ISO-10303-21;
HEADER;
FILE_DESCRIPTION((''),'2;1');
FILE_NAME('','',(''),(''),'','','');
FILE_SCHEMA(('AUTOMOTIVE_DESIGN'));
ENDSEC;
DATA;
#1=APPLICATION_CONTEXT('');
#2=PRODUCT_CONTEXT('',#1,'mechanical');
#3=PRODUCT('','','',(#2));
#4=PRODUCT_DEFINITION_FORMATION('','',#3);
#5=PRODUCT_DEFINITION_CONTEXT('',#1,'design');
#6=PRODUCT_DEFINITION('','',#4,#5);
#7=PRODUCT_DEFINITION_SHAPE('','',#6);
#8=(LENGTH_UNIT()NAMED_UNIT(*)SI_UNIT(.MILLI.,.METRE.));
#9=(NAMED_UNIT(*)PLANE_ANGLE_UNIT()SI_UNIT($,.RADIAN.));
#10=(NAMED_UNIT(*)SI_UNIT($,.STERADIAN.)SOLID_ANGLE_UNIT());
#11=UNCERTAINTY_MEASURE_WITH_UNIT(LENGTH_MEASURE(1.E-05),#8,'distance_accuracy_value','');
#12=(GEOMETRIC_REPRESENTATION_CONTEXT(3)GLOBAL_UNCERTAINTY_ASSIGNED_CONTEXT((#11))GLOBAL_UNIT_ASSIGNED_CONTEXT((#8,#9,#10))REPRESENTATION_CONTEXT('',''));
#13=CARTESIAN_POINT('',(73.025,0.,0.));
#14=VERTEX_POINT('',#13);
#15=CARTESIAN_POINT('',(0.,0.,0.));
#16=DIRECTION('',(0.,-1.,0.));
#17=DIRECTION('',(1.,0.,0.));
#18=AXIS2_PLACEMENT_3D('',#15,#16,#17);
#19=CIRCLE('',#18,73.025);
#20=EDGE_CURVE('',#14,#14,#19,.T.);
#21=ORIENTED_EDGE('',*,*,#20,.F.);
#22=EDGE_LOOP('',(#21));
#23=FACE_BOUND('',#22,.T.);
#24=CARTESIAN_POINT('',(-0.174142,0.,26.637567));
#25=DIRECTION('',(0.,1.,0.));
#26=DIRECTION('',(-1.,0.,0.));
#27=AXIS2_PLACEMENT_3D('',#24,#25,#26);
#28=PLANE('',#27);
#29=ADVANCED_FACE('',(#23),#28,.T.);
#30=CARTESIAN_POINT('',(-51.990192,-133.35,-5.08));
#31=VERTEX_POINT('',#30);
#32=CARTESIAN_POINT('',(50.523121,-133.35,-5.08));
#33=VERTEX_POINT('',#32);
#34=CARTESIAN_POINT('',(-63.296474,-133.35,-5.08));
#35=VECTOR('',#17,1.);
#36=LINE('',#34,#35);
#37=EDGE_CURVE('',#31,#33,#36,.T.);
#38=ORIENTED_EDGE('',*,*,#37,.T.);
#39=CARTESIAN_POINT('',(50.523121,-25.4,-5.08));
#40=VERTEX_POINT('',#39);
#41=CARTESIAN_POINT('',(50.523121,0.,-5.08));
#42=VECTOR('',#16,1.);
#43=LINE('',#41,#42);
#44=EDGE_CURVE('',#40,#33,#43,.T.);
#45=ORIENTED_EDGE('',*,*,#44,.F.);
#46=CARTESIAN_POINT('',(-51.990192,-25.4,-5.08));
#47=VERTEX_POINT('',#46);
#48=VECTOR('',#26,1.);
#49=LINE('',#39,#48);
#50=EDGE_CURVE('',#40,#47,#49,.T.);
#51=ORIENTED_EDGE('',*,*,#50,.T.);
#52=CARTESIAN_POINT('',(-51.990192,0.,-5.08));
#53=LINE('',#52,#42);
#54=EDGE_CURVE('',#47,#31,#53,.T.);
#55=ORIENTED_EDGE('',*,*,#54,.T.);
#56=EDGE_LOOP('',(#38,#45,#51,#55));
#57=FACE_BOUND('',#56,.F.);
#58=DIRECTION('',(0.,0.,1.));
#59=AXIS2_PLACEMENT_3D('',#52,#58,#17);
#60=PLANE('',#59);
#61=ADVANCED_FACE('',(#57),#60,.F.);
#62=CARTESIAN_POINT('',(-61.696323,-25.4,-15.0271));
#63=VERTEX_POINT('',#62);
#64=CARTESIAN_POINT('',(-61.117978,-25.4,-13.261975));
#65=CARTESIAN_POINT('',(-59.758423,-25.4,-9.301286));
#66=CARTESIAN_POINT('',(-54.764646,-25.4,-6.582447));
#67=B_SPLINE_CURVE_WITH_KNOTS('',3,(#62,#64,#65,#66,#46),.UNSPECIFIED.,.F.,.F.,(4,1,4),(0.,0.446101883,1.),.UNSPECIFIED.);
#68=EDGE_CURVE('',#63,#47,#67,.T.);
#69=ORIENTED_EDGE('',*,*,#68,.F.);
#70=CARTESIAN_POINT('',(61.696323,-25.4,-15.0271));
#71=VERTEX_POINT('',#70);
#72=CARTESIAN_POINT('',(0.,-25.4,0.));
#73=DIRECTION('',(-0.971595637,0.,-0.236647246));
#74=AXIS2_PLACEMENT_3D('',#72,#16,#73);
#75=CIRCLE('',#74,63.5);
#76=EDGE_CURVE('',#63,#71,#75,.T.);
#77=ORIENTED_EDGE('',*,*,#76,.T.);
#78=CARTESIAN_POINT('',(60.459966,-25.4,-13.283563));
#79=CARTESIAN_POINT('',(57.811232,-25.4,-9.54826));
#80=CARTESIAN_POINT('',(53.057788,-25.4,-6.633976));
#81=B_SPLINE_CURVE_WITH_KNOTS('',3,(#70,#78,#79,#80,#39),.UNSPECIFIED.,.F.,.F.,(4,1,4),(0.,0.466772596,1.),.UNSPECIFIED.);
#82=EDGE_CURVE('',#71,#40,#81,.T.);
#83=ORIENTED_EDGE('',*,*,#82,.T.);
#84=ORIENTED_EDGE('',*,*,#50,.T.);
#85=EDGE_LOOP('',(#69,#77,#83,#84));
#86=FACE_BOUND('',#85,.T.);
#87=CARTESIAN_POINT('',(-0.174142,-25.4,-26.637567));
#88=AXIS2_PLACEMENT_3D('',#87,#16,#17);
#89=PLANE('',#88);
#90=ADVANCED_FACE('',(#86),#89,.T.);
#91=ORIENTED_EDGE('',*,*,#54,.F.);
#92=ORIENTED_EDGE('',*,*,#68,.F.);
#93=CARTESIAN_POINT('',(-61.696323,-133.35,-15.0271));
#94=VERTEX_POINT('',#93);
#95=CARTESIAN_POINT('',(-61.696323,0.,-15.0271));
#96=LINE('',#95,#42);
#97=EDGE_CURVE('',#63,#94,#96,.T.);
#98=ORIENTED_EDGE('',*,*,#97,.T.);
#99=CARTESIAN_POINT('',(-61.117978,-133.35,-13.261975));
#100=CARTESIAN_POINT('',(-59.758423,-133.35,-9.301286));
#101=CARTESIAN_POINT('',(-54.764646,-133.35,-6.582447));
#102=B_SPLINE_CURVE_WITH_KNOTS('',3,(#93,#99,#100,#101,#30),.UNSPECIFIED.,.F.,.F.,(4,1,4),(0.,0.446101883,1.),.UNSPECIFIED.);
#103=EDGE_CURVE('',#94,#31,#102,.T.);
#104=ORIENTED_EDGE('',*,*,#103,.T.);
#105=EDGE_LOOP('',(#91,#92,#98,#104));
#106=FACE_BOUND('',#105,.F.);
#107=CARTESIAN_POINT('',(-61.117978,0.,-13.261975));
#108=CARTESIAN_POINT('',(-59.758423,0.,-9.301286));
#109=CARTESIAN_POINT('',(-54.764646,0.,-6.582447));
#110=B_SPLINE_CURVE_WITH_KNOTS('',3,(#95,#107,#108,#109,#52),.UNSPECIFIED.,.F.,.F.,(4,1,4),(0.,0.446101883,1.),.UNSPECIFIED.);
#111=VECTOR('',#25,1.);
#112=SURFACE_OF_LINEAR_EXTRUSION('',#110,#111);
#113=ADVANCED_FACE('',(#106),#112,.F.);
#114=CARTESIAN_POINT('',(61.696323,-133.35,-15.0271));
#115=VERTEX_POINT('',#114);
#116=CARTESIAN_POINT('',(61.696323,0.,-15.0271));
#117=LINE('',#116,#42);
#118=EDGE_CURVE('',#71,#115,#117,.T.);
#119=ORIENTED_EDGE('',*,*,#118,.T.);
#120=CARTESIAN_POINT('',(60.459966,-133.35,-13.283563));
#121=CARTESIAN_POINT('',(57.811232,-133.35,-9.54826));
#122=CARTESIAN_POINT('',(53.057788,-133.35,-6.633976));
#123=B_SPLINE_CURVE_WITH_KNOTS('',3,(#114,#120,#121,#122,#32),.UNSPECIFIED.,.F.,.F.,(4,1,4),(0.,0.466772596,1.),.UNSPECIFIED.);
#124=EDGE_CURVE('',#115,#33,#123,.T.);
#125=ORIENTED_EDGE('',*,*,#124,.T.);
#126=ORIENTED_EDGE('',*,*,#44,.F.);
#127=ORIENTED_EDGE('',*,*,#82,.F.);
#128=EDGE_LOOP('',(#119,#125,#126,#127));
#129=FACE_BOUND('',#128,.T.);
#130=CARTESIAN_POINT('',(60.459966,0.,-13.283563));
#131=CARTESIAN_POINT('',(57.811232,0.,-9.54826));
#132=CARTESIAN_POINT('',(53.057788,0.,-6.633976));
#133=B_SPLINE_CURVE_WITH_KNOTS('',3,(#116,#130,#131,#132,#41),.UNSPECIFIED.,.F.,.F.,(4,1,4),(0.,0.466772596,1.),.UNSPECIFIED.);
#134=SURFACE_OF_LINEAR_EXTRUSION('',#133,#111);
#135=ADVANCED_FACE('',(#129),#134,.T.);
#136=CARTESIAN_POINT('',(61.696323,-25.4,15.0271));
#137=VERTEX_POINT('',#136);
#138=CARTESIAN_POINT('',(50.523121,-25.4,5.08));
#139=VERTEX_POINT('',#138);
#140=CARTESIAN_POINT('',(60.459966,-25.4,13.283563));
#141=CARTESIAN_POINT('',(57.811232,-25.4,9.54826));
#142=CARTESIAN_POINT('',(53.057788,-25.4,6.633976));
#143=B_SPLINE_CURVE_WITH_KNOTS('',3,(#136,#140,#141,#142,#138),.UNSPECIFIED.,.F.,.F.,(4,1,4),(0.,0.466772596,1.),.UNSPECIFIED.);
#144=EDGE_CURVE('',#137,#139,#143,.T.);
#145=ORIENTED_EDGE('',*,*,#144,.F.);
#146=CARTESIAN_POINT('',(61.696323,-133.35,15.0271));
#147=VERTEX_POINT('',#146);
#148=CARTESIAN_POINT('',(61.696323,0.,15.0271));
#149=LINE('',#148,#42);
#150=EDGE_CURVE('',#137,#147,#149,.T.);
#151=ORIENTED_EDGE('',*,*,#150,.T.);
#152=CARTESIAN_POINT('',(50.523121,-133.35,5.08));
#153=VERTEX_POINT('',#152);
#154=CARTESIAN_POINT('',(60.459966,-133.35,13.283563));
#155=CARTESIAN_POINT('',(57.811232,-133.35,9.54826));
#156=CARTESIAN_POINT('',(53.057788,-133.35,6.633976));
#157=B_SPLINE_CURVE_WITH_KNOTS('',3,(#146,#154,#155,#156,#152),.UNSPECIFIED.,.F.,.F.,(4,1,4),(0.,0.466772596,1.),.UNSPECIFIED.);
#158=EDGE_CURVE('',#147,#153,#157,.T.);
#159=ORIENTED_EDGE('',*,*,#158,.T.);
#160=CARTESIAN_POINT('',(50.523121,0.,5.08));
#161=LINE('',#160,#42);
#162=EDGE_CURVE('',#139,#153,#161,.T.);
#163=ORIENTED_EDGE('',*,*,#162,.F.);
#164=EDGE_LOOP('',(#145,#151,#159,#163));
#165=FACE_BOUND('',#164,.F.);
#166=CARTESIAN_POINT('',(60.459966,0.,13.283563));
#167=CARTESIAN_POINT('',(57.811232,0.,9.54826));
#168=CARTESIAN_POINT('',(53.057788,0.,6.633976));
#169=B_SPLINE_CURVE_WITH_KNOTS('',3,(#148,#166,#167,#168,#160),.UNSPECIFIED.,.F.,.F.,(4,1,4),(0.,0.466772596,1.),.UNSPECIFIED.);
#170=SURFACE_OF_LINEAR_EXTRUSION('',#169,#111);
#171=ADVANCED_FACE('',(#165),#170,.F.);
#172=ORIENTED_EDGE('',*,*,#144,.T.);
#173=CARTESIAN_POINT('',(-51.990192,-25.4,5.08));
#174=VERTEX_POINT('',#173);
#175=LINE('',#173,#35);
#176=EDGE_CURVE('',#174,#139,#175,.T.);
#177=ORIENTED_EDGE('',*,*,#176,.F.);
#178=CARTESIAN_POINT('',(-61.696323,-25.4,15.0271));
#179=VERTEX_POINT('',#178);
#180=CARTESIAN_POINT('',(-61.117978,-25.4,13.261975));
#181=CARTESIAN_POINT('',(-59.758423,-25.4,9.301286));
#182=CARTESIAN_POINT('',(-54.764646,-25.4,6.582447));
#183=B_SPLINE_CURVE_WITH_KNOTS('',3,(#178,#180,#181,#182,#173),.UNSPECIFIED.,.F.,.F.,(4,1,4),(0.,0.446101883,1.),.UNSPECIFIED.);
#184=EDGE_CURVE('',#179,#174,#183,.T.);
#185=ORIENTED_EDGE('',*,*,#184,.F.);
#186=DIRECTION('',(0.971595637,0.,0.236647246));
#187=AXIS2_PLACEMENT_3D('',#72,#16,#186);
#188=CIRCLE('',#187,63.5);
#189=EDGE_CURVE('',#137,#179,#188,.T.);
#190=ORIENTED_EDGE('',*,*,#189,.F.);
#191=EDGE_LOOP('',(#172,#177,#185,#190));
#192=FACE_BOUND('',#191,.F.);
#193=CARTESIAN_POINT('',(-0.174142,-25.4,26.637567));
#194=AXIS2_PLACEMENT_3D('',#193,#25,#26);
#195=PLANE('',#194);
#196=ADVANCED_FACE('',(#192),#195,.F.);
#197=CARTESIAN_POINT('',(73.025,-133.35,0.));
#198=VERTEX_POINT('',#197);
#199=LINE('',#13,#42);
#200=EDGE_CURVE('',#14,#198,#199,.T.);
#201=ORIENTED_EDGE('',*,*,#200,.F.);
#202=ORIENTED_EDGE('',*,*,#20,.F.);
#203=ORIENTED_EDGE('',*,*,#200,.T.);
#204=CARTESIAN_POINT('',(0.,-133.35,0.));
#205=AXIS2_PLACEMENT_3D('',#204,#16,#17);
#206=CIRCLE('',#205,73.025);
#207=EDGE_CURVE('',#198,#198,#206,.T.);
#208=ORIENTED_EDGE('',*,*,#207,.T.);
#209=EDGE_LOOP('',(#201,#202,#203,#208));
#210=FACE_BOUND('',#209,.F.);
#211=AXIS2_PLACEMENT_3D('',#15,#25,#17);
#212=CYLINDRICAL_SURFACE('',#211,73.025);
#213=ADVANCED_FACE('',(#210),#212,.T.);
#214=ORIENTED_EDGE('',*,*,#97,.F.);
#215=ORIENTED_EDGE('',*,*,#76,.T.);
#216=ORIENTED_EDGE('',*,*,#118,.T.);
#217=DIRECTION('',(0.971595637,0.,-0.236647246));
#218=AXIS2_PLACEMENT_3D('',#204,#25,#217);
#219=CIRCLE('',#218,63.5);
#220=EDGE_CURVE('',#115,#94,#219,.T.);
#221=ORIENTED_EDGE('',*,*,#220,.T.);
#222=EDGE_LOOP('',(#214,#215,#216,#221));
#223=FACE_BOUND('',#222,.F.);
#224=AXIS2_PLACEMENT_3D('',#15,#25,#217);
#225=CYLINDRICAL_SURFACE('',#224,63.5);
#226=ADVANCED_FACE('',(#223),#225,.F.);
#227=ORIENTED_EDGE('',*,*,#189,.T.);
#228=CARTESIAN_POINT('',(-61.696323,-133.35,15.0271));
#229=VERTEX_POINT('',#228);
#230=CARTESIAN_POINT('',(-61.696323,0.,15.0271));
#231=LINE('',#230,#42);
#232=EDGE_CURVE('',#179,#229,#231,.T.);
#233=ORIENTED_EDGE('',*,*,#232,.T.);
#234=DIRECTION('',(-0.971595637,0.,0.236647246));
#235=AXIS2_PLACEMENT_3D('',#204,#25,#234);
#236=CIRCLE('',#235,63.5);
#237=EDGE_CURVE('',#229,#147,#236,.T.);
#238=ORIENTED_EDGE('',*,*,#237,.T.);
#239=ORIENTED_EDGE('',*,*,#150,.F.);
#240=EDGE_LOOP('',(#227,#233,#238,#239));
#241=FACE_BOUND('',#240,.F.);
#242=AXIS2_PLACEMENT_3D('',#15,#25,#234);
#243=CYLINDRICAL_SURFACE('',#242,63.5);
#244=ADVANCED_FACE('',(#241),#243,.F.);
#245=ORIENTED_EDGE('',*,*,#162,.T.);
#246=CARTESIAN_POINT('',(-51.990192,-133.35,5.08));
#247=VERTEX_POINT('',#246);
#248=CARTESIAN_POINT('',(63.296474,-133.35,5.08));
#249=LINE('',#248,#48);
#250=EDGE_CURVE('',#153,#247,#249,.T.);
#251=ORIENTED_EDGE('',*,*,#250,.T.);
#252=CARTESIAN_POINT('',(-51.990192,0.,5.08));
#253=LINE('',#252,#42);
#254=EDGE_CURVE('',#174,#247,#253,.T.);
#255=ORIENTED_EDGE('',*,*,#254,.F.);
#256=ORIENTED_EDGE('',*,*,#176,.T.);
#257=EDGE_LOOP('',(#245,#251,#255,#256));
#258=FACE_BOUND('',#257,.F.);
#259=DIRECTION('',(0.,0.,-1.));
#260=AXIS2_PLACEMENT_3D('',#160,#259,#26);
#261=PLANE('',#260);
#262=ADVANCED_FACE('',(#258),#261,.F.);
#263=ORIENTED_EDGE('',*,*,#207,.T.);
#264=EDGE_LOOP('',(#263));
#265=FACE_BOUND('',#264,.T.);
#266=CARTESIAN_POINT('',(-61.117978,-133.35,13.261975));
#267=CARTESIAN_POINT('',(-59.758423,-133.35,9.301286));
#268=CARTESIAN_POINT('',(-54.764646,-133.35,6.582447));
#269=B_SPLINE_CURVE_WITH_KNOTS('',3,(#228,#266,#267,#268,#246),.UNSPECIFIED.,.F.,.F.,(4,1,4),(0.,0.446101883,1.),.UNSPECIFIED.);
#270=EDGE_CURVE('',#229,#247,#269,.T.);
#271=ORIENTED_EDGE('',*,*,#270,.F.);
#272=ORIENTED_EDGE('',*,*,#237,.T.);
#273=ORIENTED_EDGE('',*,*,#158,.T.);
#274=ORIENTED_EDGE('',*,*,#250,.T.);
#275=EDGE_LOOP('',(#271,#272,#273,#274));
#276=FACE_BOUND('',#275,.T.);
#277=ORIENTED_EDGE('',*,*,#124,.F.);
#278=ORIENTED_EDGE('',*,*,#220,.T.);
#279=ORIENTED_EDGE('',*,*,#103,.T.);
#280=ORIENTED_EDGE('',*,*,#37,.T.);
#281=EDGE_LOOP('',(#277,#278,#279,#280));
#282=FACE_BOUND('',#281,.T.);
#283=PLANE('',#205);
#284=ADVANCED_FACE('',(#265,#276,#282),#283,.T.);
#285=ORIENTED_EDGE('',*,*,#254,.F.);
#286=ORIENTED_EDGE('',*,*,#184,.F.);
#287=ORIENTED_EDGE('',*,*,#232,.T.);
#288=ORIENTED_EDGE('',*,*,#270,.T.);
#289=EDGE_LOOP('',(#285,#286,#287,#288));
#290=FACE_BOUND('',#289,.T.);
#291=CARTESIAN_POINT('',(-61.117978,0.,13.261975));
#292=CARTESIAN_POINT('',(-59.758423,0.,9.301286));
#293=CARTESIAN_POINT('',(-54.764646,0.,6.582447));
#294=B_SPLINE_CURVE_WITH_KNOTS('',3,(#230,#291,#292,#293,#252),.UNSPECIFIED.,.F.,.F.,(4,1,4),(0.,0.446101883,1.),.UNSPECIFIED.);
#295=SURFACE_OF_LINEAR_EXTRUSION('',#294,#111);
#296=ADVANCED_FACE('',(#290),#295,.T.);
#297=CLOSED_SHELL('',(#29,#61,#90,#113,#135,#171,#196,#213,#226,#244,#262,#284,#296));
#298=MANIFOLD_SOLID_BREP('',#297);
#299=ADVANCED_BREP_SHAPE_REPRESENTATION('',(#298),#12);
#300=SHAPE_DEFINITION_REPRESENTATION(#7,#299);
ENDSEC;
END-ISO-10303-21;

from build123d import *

# Parameters (mm, degrees)
F0_R     = 73.025
F1_DEPTH = 133.35
F2_DEPTH = 25.4


with BuildPart() as f1:
    # F0 (on Front) → F1 (new body)
    with BuildSketch(Plane.XZ):
        Circle(F0_R)
        with BuildLine():
            ThreePointArc((63.2964738354, 5.08), (63.4490980572, 2.5420377112), (63.5, 0))
            ThreePointArc((63.5, 0), (63.4490980572, -2.5420377112), (63.2964738354, -5.08))
            ThreePointArc((63.2964738354, -5.08), (62.6939870382, -10.0853353566), (61.696322928, -15.0271000916))
            ThreePointArc((61.696322928, -15.0271000916), (0, -63.5), (-61.696322928, -15.0271000916))
            ThreePointArc((-61.696322928, -15.0271000916), (-62.6939870382, -10.0853353566), (-63.2964738354, -5.08))
            ThreePointArc((-63.2964738354, -5.08), (-63.5, 0), (-63.2964738354, 5.08))
            ThreePointArc((-63.2964738354, 5.08), (-62.6939870382, 10.0853353566), (-61.696322928, 15.0271000916))
            ThreePointArc((-61.696322928, 15.0271000916), (0, 63.5), (61.696322928, 15.0271000916))
            ThreePointArc((61.696322928, 15.0271000916), (62.6939870382, 10.0853353566), (63.2964738354, 5.08))
        make_face(mode=Mode.SUBTRACT)
        with BuildLine():
            ThreePointArc((63.2964738354, -5.08), (63.4490980572, -2.5420377112), (63.5, 0))
            ThreePointArc((63.5, 0), (63.4490980572, 2.5420377112), (63.2964738354, 5.08))
            Line((63.2964738354, 5.08), (50.5231209099, 5.08))
            Line((50.5231209099, 5.08), (-8.6646769196, 5.08))
            Line((-8.6646769196, 5.08), (-51.9901923835, 5.08))
            Line((-51.9901923835, 5.08), (-63.2964738354, 5.08))
            ThreePointArc((-63.2964738354, 5.08), (-63.5, 0), (-63.2964738354, -5.08))
            Line((-63.2964738354, -5.08), (-51.9901923835, -5.08))
            Line((-51.9901923835, -5.08), (-8.6646769196, -5.08))
            Line((-8.6646769196, -5.08), (50.5231209099, -5.08))
            Line((50.5231209099, -5.08), (63.2964738354, -5.08))
        make_face()
        with BuildLine():
            Line((50.5231209099, 5.08), (63.2964738354, 5.08))
            ThreePointArc((63.2964738354, 5.08), (62.6939870382, 10.0853353566), (61.696322928, 15.0271000916))
            add(Edge.make_bspline(
                [(61.696322928, 15.0271000916), (60.4599662433, 13.2835631459), (57.8112317295, 9.5482604282), (53.0577875896, 6.6339762092), (50.5231209099, 5.08)],
                knots=[0, 0, 0, 0, 0.4667725958, 1, 1, 1, 1], degree=3))
        make_face()
        with BuildLine():
            ThreePointArc((61.696322928, -15.0271000916), (62.6939870382, -10.0853353566), (63.2964738354, -5.08))
            Line((63.2964738354, -5.08), (50.5231209099, -5.08))
            add(Edge.make_bspline(
                [(61.696322928, -15.0271000916), (60.4599662433, -13.2835631459), (57.8112317295, -9.5482604282), (53.0577875896, -6.6339762092), (50.5231209099, -5.08)],
                knots=[0, 0, 0, 0, 0.4667725958, 1, 1, 1, 1], degree=3))
        make_face()
        with BuildLine():
            add(Edge.make_bspline(
                [(-61.696322928, 15.0271000916), (-61.1179777584, 13.2619750664), (-59.7584225638, 9.3012859588), (-54.7646458459, 6.5824467775), (-51.9901923835, 5.08)],
                knots=[0, 0, 0, 0, 0.4461018831, 1, 1, 1, 1], degree=3))
            ThreePointArc((-61.696322928, 15.0271000916), (-62.6939870382, 10.0853353566), (-63.2964738354, 5.08))
            Line((-63.2964738354, 5.08), (-51.9901923835, 5.08))
        make_face()
        with BuildLine():
            ThreePointArc((-63.2964738354, -5.08), (-62.6939870382, -10.0853353566), (-61.696322928, -15.0271000916))
            add(Edge.make_bspline(
                [(-61.696322928, -15.0271000916), (-61.1179777584, -13.2619750664), (-59.7584225638, -9.3012859588), (-54.7646458459, -6.5824467775), (-51.9901923835, -5.08)],
                knots=[0, 0, 0, 0, 0.4461018831, 1, 1, 1, 1], degree=3))
            Line((-51.9901923835, -5.08), (-63.2964738354, -5.08))
        make_face()
    extrude(amount=F1_DEPTH)

    # F0 (on Front) → F2 (join)
    with BuildSketch(Plane.XZ):
        with BuildLine():
            add(Edge.make_bspline(
                [(61.696322928, 15.0271000916), (60.4599662433, 13.2835631459), (57.8112317295, 9.5482604282), (53.0577875896, 6.6339762092), (50.5231209099, 5.08)],
                knots=[0, 0, 0, 0, 0.4667725958, 1, 1, 1, 1], degree=3))
            ThreePointArc((61.696322928, 15.0271000916), (0, 63.5), (-61.696322928, 15.0271000916))
            add(Edge.make_bspline(
                [(-61.696322928, 15.0271000916), (-61.1179777584, 13.2619750664), (-59.7584225638, 9.3012859588), (-54.7646458459, 6.5824467775), (-51.9901923835, 5.08)],
                knots=[0, 0, 0, 0, 0.4461018831, 1, 1, 1, 1], degree=3))
            Line((-51.9901923835, 5.08), (-8.6646769196, 5.08))
            Line((-8.6646769196, 5.08), (50.5231209099, 5.08))
        make_face()
        with BuildLine():
            ThreePointArc((-61.696322928, -15.0271000916), (0, -63.5), (61.696322928, -15.0271000916))
            add(Edge.make_bspline(
                [(61.696322928, -15.0271000916), (60.4599662433, -13.2835631459), (57.8112317295, -9.5482604282), (53.0577875896, -6.6339762092), (50.5231209099, -5.08)],
                knots=[0, 0, 0, 0, 0.4667725958, 1, 1, 1, 1], degree=3))
            Line((50.5231209099, -5.08), (-8.6646769196, -5.08))
            Line((-8.6646769196, -5.08), (-51.9901923835, -5.08))
            add(Edge.make_bspline(
                [(-61.696322928, -15.0271000916), (-61.1179777584, -13.2619750664), (-59.7584225638, -9.3012859588), (-54.7646458459, -6.5824467775), (-51.9901923835, -5.08)],
                knots=[0, 0, 0, 0, 0.4461018831, 1, 1, 1, 1], degree=3))
        make_face()
    extrude(amount=F2_DEPTH)


solid = f1.part
